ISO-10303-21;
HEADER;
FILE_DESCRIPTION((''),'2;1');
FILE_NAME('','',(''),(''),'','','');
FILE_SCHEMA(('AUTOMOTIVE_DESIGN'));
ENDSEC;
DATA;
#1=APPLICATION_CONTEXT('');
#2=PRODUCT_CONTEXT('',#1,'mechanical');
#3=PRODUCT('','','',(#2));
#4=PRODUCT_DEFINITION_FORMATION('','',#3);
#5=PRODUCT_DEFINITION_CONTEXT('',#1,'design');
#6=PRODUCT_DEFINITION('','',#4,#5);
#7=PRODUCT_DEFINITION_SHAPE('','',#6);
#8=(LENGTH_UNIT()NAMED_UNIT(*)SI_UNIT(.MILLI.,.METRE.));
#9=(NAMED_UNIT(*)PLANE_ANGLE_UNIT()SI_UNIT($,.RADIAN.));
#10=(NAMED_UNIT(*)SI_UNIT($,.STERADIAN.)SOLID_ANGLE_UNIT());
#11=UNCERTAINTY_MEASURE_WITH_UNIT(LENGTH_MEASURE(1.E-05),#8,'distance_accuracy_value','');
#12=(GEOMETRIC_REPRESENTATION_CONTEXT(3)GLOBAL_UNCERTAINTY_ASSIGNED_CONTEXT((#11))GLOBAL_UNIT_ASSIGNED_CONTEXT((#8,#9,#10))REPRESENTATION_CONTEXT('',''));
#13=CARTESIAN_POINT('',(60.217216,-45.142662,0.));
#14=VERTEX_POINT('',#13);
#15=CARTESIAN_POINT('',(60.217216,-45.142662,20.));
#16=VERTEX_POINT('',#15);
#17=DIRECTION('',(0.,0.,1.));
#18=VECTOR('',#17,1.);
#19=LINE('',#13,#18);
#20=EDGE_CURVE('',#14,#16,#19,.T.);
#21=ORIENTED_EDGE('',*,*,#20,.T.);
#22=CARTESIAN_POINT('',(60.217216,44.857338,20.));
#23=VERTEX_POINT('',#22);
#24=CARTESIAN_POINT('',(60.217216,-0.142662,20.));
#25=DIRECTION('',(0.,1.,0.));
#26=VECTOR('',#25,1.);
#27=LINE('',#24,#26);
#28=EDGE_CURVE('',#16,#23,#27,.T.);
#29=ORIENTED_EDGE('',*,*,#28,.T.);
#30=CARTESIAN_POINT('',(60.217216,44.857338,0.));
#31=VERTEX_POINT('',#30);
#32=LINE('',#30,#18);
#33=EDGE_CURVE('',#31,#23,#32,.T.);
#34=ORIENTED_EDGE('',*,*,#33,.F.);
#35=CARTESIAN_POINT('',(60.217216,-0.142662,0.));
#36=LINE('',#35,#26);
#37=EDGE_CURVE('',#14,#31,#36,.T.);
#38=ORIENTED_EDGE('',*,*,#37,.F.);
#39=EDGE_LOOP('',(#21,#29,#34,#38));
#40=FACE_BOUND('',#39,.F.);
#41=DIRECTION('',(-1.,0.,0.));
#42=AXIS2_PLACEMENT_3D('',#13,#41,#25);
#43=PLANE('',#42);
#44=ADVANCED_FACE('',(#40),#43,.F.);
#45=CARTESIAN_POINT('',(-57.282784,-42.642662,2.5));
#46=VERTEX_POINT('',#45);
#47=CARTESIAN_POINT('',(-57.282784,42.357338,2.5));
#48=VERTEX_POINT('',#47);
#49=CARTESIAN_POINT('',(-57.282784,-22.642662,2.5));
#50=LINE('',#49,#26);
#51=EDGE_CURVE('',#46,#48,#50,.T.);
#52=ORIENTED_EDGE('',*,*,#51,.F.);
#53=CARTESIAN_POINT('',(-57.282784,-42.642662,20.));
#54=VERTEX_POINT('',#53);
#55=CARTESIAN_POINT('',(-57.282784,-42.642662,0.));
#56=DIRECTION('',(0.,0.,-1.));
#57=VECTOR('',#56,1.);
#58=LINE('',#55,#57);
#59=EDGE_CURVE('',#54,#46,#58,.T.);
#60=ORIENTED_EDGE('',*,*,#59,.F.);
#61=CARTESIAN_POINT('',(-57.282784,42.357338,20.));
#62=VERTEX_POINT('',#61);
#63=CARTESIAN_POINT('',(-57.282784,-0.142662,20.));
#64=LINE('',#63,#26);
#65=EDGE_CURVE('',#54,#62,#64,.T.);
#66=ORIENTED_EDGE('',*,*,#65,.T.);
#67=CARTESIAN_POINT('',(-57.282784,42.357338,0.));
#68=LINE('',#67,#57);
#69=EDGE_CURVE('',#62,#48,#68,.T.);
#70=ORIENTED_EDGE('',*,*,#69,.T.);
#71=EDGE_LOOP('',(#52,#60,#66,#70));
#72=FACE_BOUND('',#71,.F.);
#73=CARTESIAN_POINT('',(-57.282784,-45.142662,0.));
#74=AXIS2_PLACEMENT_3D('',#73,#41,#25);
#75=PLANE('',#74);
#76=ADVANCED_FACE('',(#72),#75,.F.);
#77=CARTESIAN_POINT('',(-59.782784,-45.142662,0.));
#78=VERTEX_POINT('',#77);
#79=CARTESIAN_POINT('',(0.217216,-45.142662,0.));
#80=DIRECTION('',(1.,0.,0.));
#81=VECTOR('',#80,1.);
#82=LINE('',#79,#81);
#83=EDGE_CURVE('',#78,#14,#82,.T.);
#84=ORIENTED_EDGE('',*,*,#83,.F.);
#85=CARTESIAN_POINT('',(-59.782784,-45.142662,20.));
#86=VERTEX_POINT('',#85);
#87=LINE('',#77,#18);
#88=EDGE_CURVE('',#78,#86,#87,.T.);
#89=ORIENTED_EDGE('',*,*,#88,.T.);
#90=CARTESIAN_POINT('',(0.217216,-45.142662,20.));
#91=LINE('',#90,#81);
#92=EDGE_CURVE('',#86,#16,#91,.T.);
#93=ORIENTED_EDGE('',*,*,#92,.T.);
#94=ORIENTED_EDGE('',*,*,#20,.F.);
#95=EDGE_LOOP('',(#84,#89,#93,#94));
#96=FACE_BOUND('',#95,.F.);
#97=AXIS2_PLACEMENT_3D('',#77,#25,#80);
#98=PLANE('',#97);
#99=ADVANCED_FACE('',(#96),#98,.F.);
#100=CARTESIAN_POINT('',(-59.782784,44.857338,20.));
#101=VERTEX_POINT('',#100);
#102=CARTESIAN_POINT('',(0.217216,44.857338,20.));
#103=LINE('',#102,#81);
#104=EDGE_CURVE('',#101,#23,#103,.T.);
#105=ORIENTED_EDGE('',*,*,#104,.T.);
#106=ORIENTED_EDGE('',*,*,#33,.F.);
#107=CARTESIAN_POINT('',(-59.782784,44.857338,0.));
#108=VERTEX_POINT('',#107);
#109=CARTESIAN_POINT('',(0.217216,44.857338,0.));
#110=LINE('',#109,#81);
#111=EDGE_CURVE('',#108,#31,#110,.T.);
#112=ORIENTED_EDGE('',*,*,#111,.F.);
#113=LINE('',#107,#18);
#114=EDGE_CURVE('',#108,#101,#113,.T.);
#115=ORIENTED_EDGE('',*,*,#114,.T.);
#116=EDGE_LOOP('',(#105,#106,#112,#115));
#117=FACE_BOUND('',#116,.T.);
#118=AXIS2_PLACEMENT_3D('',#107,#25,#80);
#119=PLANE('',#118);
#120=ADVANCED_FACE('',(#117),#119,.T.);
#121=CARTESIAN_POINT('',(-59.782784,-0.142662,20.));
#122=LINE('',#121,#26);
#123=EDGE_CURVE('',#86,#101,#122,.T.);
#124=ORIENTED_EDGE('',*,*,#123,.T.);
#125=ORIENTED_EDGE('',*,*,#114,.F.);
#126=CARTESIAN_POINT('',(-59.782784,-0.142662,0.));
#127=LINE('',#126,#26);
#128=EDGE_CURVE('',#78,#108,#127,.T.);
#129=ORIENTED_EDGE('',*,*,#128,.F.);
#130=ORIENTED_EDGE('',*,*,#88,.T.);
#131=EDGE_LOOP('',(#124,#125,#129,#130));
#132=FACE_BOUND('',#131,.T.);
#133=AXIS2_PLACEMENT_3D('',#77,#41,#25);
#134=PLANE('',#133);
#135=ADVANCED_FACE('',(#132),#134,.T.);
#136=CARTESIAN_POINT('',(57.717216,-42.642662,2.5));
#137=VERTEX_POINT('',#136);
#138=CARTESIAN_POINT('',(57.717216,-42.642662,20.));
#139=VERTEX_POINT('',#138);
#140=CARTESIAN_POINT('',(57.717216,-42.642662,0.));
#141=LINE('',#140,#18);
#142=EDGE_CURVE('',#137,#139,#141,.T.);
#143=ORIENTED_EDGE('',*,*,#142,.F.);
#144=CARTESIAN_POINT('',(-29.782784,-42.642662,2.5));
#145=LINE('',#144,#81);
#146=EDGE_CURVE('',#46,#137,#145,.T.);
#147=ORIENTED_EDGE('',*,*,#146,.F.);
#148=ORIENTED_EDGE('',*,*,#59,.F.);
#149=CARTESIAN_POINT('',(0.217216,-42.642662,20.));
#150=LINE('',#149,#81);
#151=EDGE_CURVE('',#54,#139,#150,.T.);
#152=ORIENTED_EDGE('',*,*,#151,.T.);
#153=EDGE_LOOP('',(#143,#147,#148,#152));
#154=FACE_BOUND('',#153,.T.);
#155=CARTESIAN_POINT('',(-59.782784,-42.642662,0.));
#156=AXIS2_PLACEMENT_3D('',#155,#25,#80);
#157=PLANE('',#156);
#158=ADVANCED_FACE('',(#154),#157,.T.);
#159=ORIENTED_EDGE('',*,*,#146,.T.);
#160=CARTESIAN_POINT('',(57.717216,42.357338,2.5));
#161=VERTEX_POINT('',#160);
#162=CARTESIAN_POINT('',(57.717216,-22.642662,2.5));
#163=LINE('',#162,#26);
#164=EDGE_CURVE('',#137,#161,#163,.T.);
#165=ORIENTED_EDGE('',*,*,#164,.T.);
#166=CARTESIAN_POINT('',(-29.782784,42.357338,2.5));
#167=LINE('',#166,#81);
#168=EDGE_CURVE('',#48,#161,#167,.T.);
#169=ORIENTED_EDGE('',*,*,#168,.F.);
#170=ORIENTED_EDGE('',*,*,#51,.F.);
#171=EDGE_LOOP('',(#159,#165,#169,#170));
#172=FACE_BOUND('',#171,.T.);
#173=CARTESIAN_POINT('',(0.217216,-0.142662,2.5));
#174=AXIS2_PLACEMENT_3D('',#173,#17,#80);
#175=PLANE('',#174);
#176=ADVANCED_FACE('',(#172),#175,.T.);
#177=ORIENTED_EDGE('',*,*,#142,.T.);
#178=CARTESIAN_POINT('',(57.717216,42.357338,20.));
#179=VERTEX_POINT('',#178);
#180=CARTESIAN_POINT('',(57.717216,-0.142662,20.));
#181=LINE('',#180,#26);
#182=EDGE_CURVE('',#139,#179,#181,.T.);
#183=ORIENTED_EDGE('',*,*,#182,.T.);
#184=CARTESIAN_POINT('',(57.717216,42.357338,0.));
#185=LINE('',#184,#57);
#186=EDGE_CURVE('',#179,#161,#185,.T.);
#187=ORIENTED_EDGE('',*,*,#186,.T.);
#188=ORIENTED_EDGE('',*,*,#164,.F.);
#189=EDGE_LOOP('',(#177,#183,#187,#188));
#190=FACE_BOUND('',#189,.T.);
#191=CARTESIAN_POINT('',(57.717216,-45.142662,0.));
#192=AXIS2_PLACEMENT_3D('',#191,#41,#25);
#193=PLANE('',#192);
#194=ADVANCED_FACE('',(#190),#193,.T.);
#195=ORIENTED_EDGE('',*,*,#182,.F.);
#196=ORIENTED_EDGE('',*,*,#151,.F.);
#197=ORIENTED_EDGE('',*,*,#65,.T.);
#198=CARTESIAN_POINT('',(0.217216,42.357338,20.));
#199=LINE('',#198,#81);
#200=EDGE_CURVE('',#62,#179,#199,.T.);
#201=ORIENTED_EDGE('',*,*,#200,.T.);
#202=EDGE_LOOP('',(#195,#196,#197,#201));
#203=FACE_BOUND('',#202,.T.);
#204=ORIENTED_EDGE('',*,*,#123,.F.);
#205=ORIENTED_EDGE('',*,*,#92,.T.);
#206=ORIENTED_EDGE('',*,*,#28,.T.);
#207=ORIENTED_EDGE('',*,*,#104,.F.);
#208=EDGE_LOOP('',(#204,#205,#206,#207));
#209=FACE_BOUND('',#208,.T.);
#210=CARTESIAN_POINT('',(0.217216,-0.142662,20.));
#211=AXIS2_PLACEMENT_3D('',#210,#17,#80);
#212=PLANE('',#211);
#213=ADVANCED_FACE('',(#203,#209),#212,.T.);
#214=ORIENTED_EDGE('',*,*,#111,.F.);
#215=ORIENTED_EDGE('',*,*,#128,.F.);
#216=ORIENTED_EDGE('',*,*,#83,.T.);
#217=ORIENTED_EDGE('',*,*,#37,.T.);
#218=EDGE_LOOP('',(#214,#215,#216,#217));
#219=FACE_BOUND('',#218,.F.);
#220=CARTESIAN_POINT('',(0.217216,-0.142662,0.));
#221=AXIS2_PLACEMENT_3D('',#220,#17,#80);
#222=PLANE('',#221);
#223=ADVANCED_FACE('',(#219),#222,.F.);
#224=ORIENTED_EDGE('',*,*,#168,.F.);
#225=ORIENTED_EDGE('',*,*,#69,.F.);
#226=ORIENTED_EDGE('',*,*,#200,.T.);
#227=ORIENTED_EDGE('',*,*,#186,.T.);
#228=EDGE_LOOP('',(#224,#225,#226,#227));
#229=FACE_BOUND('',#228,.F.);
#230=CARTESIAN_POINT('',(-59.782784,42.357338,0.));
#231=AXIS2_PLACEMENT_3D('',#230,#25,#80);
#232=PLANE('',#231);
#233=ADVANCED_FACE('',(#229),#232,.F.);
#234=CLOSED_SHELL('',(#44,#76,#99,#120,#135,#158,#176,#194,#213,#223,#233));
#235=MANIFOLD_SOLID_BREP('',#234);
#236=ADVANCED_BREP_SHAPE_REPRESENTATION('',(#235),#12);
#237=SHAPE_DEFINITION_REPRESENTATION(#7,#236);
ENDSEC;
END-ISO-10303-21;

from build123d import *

# Parameters (mm, degrees)
F0_W     = 120
F0_H     = 90
F1_DEPTH = 20
F2_T     = -2.5


# Not quite as in the source:
# - a feature names something its author has since deleted; it is built from what else it names


with BuildPart() as f1:
    # F0 (on Top) → F1 (new body)
    with BuildSketch(Plane.XY):
        with Locations((0.2172155073, -0.1426615352)):
            Rectangle(F0_W, F0_H)
    extrude(amount=F1_DEPTH)

    # F2
    f2_openings = [f1.faces().sort_by_distance(p)[0] for p in [
        (0.217216, -0.142662, 20),
    ]]
    offset(amount=F2_T, openings=f2_openings)


solid = f1.part
